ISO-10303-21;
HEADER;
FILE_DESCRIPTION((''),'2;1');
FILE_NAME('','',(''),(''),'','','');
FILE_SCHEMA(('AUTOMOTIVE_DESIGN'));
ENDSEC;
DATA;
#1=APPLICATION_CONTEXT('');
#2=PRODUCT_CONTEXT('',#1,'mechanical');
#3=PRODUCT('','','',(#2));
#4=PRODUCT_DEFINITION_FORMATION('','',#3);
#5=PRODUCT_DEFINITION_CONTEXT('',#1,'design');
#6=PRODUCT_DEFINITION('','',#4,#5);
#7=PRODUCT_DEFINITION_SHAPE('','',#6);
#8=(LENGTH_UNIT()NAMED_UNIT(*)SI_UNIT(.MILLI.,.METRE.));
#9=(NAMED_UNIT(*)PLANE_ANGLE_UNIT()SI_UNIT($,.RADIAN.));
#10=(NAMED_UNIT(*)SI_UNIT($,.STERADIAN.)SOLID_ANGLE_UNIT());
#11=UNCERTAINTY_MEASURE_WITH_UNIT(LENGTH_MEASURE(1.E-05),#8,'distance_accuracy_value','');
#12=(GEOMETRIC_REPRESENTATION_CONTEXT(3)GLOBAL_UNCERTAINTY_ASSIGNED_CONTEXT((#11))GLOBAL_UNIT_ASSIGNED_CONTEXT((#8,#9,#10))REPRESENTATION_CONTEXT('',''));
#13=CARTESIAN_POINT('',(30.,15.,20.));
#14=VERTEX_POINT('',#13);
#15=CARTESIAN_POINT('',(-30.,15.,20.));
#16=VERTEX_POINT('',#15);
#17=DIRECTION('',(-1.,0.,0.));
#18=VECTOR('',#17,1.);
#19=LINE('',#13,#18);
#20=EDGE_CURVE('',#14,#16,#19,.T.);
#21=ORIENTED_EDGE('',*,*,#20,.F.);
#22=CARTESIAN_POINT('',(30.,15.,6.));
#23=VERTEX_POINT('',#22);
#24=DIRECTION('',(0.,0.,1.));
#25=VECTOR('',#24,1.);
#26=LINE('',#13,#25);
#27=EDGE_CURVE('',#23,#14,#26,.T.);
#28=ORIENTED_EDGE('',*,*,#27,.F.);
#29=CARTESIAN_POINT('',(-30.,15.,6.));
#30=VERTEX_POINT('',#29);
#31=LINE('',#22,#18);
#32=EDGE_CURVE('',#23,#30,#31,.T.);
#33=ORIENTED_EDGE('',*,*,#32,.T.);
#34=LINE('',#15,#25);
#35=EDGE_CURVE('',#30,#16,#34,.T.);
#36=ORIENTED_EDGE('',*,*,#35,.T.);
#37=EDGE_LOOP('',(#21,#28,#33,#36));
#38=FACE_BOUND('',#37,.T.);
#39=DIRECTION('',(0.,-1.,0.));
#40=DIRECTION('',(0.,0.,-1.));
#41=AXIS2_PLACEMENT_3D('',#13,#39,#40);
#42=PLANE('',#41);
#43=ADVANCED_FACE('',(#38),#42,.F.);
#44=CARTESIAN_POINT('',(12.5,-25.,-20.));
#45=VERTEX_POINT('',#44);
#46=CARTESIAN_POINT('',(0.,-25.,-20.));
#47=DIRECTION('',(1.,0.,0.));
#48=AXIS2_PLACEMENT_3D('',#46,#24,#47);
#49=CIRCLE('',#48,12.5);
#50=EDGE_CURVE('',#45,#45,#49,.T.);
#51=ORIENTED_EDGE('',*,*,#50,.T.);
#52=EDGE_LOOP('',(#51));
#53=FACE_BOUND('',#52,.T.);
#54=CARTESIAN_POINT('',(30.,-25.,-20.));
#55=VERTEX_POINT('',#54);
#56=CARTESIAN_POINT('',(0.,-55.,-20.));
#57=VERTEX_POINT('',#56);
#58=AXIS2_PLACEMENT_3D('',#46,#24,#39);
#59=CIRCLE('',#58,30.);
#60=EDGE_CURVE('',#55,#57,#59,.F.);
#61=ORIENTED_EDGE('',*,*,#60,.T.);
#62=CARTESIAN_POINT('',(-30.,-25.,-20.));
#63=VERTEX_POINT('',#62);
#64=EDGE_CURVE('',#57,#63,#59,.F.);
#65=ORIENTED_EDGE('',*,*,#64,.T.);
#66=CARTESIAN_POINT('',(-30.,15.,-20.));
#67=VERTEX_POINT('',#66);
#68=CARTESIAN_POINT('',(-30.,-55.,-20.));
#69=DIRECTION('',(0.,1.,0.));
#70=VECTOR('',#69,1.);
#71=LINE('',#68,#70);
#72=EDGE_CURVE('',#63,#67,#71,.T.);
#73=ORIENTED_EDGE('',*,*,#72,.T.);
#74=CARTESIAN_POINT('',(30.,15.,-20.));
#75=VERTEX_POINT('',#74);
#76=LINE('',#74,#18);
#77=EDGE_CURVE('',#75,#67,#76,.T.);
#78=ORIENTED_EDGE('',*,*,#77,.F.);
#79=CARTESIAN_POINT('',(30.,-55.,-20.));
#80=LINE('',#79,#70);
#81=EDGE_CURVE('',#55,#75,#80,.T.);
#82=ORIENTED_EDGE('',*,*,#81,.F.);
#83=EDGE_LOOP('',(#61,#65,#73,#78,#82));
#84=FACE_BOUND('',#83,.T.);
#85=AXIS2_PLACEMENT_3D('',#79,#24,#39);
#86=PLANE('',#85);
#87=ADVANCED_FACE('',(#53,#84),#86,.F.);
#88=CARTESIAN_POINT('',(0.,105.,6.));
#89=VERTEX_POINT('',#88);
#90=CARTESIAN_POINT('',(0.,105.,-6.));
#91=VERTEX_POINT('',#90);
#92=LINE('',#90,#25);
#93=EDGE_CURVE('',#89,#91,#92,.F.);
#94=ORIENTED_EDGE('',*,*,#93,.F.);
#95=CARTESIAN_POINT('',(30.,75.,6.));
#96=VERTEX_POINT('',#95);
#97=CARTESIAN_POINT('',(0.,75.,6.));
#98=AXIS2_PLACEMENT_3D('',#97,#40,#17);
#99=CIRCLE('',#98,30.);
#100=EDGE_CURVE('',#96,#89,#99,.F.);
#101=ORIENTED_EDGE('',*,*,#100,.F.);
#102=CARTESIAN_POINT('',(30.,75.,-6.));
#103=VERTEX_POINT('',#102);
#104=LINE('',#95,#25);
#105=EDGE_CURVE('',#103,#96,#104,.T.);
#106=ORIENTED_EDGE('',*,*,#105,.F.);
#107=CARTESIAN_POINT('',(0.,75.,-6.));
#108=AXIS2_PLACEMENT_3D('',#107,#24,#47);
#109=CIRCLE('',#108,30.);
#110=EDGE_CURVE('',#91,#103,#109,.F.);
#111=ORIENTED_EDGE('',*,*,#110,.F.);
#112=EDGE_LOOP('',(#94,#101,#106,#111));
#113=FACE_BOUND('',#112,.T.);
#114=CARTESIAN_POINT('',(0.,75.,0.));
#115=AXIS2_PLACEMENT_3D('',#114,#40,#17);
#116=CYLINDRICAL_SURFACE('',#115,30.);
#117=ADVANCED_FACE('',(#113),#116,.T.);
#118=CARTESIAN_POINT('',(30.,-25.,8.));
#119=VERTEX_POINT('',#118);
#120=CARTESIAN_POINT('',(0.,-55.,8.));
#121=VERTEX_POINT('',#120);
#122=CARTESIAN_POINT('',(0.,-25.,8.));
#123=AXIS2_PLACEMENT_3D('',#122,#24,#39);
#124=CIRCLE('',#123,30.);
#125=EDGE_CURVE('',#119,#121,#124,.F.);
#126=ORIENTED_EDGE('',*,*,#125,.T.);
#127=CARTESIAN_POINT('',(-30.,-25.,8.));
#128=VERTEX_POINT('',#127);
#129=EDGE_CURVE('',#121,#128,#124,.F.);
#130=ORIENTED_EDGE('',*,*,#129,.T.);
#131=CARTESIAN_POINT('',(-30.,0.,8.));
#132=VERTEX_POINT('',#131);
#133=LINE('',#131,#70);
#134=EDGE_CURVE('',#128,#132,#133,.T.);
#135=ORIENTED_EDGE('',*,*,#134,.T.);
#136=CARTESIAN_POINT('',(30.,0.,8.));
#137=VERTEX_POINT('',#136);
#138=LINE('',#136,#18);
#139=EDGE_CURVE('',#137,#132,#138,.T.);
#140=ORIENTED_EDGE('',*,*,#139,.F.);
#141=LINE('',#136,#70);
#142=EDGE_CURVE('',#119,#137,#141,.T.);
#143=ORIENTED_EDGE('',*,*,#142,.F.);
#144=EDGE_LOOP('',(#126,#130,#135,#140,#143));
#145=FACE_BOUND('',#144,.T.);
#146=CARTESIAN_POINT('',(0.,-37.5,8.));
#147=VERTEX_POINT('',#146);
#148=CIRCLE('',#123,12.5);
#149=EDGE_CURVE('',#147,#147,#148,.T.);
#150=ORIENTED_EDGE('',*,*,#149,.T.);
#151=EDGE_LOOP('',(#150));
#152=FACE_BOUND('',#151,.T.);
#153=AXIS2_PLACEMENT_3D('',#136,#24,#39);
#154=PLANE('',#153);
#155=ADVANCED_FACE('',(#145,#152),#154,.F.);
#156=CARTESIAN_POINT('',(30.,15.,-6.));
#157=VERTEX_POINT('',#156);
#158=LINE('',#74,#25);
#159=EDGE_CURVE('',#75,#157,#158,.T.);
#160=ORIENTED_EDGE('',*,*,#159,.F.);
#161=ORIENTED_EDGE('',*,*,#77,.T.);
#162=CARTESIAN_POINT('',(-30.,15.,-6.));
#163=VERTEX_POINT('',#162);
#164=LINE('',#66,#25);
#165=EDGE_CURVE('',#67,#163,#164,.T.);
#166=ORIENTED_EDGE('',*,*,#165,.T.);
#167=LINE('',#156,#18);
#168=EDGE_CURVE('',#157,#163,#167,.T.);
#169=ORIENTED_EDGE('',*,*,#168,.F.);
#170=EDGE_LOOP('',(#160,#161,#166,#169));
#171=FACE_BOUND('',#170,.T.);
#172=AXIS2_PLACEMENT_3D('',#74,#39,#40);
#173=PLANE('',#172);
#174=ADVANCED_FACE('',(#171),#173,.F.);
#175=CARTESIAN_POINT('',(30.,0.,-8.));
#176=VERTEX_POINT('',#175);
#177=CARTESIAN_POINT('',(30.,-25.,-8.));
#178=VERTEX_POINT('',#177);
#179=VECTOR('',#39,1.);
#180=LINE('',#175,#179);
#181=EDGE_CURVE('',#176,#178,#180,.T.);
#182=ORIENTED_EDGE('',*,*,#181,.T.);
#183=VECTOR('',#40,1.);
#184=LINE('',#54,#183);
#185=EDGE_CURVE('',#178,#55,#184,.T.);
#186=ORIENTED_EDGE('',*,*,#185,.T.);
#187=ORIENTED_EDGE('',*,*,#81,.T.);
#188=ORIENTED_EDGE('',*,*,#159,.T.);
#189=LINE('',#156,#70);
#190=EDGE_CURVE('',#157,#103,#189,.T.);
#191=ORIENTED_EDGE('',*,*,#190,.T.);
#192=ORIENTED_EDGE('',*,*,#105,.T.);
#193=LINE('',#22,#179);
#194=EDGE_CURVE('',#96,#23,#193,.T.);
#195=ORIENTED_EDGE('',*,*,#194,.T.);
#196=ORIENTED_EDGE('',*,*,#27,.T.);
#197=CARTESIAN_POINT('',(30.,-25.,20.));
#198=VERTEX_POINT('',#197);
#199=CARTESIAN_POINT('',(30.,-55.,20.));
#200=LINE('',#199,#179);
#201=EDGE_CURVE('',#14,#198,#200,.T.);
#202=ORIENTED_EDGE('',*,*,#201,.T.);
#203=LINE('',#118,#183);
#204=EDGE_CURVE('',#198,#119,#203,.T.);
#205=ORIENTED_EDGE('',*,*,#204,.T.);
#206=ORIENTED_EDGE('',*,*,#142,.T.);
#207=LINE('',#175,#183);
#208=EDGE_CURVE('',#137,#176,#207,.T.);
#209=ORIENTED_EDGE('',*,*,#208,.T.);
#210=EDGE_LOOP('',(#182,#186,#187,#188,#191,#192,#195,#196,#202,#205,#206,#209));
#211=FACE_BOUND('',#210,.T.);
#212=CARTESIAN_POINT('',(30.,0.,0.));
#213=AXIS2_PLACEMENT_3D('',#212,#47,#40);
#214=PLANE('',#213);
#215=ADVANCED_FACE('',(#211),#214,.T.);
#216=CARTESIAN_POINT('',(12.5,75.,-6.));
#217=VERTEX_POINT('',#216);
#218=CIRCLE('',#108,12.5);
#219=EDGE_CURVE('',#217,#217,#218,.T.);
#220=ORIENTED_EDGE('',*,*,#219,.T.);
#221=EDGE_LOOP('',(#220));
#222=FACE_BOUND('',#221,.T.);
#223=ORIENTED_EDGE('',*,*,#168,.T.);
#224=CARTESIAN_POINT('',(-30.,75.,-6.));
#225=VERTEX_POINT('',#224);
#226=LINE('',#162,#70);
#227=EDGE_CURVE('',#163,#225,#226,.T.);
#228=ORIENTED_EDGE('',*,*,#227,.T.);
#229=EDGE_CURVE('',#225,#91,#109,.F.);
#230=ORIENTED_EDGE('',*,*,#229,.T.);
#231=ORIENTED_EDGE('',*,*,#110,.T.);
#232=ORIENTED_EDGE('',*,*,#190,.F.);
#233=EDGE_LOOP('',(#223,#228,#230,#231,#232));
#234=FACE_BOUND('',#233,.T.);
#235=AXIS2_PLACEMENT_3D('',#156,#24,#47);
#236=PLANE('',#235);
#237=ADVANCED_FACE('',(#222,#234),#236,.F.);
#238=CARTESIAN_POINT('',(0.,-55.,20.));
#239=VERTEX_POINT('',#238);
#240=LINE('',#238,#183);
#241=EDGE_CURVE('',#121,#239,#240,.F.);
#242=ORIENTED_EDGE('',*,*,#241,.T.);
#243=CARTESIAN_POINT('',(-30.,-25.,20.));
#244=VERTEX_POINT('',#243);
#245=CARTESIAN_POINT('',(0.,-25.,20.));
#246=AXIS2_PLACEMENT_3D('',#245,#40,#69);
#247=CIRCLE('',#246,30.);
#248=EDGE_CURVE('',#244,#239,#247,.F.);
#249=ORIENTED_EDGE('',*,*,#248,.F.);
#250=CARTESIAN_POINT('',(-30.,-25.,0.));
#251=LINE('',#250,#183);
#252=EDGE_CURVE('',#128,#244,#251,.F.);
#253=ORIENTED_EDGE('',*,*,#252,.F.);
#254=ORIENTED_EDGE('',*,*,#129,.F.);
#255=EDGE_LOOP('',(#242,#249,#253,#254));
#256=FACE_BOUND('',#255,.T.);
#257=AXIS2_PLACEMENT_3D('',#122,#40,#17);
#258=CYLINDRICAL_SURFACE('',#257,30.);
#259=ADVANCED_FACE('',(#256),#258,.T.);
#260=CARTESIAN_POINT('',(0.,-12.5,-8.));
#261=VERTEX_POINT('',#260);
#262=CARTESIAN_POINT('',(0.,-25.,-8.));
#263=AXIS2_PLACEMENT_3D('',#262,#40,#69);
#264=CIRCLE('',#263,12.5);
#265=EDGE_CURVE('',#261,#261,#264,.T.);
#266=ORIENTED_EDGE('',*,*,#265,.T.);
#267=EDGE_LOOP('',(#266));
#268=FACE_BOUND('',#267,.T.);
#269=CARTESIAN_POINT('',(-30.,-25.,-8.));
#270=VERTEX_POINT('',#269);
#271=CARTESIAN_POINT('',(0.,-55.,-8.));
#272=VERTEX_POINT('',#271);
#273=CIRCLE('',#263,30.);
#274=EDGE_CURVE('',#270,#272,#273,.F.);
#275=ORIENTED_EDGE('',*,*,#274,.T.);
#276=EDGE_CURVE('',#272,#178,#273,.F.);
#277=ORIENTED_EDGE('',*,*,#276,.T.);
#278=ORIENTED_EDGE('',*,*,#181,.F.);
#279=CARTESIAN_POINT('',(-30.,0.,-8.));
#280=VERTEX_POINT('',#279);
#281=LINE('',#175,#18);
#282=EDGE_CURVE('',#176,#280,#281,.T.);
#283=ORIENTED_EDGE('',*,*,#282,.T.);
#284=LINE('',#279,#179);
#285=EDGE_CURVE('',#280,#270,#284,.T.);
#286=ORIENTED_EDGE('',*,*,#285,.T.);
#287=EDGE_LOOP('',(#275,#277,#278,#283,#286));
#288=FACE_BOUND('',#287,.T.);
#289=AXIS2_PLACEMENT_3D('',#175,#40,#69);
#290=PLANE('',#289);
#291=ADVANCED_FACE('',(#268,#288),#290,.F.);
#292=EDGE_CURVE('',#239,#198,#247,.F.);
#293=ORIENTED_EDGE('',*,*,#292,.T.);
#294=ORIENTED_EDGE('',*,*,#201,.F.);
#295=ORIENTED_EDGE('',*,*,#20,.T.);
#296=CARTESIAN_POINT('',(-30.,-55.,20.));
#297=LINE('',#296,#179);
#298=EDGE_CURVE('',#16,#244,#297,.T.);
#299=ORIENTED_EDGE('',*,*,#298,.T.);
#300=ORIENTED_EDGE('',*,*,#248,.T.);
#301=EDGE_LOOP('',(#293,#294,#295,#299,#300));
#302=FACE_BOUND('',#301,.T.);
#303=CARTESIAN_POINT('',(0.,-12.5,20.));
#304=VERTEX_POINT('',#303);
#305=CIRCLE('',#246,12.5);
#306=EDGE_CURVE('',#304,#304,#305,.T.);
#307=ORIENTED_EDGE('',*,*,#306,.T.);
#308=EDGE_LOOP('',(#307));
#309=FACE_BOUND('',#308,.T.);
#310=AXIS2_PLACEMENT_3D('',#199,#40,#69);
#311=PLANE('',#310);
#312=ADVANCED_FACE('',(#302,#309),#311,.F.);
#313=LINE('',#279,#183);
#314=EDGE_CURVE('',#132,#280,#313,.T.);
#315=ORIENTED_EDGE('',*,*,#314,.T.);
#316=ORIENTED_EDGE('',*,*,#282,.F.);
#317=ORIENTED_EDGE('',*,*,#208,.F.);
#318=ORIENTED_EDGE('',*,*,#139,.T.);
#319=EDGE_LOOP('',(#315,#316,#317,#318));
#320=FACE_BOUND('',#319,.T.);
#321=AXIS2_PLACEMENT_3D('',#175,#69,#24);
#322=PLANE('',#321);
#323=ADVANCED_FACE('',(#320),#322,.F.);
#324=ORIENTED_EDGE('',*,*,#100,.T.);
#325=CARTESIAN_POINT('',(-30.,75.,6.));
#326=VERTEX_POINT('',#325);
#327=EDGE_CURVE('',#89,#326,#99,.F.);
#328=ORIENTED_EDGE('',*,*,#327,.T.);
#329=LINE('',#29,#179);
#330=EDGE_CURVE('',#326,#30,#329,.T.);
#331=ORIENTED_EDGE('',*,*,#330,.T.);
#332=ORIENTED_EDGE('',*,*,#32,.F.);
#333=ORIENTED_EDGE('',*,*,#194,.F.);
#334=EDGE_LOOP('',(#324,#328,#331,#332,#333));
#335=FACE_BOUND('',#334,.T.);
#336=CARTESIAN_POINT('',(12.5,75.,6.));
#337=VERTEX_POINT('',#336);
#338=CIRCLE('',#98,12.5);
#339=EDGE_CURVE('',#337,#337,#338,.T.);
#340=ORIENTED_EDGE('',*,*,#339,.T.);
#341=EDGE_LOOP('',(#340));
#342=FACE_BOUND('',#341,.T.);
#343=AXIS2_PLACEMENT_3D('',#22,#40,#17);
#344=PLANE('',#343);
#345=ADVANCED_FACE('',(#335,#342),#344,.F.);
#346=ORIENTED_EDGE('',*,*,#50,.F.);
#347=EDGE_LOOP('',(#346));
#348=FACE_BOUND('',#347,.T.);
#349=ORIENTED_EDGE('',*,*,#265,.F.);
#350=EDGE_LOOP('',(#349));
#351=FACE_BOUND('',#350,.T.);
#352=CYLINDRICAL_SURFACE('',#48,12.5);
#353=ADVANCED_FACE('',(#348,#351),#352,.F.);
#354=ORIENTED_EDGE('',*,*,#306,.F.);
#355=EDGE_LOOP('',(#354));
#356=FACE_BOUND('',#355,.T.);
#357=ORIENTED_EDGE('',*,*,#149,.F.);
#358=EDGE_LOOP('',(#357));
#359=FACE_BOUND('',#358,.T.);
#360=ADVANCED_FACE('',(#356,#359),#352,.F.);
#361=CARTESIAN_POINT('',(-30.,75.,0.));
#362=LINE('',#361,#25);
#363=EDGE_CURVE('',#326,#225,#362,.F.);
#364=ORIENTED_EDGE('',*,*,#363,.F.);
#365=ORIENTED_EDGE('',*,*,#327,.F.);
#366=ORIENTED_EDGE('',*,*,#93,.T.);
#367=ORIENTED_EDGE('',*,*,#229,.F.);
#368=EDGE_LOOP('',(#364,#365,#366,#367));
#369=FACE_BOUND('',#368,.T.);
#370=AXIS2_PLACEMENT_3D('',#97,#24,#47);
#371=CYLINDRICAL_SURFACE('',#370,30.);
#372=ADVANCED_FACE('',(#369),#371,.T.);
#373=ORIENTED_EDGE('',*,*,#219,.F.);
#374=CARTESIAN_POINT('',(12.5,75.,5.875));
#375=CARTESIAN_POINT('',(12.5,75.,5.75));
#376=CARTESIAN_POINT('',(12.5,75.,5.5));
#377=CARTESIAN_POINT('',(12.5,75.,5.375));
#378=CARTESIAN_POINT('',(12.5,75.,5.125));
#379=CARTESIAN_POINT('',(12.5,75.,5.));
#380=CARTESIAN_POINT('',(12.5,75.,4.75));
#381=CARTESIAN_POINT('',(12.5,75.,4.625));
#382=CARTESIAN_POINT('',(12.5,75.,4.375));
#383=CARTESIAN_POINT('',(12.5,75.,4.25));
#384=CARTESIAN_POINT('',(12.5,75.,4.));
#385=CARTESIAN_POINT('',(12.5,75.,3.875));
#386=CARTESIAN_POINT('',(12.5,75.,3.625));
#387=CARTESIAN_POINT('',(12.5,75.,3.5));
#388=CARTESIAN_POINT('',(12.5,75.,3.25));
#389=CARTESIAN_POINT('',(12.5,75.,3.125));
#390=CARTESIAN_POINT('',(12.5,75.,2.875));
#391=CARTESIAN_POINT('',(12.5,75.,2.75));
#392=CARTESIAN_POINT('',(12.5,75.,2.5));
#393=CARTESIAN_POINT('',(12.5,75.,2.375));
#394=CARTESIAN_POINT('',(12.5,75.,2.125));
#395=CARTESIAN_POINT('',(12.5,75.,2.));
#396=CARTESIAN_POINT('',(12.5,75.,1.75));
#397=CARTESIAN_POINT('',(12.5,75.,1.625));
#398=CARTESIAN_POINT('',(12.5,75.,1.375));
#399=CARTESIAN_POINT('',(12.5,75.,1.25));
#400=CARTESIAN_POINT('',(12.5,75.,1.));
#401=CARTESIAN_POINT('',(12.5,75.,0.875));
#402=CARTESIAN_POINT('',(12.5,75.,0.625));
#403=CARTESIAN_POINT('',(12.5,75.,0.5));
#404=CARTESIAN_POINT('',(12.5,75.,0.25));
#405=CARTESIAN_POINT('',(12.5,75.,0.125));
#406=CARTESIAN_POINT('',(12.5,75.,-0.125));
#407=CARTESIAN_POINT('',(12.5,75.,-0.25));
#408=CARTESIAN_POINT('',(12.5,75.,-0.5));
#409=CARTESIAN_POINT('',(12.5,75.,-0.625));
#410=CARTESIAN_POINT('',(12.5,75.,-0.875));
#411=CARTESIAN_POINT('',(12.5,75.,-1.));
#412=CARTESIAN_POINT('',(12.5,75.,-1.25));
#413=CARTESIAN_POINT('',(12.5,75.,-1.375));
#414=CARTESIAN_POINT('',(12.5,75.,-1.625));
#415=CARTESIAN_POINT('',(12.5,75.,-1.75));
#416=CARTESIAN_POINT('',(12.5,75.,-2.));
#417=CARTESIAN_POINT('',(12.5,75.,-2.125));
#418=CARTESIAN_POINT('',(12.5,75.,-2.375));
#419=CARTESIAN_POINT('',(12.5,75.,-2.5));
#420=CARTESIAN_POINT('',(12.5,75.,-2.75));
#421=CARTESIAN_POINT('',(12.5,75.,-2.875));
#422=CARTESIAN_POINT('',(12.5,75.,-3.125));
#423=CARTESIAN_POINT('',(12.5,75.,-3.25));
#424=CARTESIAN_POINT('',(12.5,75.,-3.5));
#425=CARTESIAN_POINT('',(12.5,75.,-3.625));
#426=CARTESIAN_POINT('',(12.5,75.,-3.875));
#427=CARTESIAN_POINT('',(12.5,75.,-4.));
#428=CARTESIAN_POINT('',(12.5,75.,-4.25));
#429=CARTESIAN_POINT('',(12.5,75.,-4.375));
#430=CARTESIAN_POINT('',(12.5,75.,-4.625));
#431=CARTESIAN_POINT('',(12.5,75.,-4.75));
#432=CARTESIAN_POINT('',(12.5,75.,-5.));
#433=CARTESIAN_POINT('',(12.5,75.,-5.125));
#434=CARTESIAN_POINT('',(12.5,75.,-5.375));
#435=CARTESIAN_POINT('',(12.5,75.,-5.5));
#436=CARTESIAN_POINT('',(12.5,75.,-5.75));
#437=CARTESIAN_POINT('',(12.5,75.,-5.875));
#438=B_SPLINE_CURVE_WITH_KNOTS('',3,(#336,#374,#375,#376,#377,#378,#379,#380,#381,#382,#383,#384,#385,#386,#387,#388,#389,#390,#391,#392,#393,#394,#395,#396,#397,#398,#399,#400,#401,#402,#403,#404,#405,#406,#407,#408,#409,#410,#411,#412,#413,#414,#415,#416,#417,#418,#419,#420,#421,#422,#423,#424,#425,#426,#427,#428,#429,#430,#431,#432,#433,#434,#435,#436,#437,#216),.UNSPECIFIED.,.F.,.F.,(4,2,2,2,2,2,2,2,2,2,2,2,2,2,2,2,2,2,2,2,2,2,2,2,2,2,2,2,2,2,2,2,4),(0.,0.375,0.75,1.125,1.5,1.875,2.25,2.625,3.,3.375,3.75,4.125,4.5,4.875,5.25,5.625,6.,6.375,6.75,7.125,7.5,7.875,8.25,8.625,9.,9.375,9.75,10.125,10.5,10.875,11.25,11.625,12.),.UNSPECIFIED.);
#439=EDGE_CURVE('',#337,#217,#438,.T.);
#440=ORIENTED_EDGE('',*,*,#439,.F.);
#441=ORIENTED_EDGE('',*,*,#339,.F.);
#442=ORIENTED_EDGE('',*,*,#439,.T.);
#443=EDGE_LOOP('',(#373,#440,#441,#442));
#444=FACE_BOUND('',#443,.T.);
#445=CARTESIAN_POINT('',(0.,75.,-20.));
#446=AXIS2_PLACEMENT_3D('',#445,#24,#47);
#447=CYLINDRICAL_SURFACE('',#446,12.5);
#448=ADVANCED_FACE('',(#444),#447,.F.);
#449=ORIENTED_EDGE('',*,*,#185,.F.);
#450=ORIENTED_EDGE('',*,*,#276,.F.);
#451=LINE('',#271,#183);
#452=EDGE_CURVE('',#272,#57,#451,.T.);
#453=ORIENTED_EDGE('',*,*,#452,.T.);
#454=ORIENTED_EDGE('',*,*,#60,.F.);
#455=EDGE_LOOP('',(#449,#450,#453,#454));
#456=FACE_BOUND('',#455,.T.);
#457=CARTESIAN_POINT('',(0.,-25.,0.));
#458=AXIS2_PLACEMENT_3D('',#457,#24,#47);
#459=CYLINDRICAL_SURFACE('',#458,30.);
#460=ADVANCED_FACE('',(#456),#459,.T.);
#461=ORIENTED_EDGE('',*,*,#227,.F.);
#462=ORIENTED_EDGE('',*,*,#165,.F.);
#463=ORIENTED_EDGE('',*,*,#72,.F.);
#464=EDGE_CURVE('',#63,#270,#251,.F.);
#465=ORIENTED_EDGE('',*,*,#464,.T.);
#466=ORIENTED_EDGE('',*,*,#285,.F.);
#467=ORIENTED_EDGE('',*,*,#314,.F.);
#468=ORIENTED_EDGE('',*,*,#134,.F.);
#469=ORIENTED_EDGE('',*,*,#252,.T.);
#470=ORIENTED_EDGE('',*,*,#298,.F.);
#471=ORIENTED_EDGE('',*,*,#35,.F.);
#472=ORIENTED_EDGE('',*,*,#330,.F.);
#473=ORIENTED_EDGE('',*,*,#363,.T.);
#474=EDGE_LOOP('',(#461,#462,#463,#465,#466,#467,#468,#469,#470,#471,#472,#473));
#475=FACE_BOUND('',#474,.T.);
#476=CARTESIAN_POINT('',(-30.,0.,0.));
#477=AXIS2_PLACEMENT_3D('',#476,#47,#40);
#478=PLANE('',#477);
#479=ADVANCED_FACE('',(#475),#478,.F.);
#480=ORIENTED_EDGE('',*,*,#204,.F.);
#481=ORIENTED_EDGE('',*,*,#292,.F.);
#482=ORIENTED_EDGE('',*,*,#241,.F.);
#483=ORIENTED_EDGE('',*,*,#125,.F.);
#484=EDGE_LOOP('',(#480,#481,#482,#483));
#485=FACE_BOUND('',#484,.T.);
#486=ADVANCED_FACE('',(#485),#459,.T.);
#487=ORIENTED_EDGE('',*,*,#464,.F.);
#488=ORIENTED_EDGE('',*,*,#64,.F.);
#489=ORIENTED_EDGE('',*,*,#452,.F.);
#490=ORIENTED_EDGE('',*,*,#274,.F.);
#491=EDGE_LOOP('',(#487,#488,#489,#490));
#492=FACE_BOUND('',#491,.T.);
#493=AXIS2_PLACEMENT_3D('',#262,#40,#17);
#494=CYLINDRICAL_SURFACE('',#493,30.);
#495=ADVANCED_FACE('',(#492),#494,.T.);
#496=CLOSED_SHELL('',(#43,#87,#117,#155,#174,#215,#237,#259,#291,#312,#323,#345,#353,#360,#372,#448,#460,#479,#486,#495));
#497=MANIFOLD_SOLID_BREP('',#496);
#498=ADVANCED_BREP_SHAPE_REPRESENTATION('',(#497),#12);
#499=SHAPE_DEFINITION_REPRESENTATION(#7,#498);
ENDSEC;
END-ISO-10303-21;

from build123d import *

# Parameters (mm, degrees)
BOSS_EXTRUDE1_DEPTH     = 30
FILLET1_R               = 30
CUT_EXTRUDE1_DEPTH      = 117.297033496
CUT_EXTRUDE1_DEPTH_BACK = 117.297033496
SKETCH3_R               = 12.5


with BuildPart() as part:
    # Sketch1 → Boss-Extrude1 (new, symmetric)
    with BuildSketch(Plane.YZ):
        Polygon((0, -8), (0, 8), (-55, 8), (-55, 20), (15, 20), (15, 6), (105, 6), (105, -6), (15, -6), (15, -20), (-55, -20), (-55, -8), align=None)
    extrude(amount=BOSS_EXTRUDE1_DEPTH, both=True)

    # Fillet1
    fillet1_edges = [part.edges().sort_by_distance(p)[0] for p in [
        (-30, 105, 0),
        (30, 105, 0),
        (30, -55, -14),
        (-30, -55, -14),
        (-30, -55, 14),
        (30, -55, 14),
    ]]
    fillet(fillet1_edges, radius=FILLET1_R - 0.0001)  # a hair under: the kernel refuses the full size

    # Sketch3 → Cut-Extrude1 (cut, two sides: drawn at the far end of the back side and taken through both)
    with BuildSketch(Plane.XY.offset(20).offset(-CUT_EXTRUDE1_DEPTH_BACK)):
        with Locations((0, -25)):
            Circle(SKETCH3_R)
        with Locations((0, 75)):
            Circle(SKETCH3_R)
    extrude(amount=CUT_EXTRUDE1_DEPTH + CUT_EXTRUDE1_DEPTH_BACK, mode=Mode.SUBTRACT)


solid = part.part
